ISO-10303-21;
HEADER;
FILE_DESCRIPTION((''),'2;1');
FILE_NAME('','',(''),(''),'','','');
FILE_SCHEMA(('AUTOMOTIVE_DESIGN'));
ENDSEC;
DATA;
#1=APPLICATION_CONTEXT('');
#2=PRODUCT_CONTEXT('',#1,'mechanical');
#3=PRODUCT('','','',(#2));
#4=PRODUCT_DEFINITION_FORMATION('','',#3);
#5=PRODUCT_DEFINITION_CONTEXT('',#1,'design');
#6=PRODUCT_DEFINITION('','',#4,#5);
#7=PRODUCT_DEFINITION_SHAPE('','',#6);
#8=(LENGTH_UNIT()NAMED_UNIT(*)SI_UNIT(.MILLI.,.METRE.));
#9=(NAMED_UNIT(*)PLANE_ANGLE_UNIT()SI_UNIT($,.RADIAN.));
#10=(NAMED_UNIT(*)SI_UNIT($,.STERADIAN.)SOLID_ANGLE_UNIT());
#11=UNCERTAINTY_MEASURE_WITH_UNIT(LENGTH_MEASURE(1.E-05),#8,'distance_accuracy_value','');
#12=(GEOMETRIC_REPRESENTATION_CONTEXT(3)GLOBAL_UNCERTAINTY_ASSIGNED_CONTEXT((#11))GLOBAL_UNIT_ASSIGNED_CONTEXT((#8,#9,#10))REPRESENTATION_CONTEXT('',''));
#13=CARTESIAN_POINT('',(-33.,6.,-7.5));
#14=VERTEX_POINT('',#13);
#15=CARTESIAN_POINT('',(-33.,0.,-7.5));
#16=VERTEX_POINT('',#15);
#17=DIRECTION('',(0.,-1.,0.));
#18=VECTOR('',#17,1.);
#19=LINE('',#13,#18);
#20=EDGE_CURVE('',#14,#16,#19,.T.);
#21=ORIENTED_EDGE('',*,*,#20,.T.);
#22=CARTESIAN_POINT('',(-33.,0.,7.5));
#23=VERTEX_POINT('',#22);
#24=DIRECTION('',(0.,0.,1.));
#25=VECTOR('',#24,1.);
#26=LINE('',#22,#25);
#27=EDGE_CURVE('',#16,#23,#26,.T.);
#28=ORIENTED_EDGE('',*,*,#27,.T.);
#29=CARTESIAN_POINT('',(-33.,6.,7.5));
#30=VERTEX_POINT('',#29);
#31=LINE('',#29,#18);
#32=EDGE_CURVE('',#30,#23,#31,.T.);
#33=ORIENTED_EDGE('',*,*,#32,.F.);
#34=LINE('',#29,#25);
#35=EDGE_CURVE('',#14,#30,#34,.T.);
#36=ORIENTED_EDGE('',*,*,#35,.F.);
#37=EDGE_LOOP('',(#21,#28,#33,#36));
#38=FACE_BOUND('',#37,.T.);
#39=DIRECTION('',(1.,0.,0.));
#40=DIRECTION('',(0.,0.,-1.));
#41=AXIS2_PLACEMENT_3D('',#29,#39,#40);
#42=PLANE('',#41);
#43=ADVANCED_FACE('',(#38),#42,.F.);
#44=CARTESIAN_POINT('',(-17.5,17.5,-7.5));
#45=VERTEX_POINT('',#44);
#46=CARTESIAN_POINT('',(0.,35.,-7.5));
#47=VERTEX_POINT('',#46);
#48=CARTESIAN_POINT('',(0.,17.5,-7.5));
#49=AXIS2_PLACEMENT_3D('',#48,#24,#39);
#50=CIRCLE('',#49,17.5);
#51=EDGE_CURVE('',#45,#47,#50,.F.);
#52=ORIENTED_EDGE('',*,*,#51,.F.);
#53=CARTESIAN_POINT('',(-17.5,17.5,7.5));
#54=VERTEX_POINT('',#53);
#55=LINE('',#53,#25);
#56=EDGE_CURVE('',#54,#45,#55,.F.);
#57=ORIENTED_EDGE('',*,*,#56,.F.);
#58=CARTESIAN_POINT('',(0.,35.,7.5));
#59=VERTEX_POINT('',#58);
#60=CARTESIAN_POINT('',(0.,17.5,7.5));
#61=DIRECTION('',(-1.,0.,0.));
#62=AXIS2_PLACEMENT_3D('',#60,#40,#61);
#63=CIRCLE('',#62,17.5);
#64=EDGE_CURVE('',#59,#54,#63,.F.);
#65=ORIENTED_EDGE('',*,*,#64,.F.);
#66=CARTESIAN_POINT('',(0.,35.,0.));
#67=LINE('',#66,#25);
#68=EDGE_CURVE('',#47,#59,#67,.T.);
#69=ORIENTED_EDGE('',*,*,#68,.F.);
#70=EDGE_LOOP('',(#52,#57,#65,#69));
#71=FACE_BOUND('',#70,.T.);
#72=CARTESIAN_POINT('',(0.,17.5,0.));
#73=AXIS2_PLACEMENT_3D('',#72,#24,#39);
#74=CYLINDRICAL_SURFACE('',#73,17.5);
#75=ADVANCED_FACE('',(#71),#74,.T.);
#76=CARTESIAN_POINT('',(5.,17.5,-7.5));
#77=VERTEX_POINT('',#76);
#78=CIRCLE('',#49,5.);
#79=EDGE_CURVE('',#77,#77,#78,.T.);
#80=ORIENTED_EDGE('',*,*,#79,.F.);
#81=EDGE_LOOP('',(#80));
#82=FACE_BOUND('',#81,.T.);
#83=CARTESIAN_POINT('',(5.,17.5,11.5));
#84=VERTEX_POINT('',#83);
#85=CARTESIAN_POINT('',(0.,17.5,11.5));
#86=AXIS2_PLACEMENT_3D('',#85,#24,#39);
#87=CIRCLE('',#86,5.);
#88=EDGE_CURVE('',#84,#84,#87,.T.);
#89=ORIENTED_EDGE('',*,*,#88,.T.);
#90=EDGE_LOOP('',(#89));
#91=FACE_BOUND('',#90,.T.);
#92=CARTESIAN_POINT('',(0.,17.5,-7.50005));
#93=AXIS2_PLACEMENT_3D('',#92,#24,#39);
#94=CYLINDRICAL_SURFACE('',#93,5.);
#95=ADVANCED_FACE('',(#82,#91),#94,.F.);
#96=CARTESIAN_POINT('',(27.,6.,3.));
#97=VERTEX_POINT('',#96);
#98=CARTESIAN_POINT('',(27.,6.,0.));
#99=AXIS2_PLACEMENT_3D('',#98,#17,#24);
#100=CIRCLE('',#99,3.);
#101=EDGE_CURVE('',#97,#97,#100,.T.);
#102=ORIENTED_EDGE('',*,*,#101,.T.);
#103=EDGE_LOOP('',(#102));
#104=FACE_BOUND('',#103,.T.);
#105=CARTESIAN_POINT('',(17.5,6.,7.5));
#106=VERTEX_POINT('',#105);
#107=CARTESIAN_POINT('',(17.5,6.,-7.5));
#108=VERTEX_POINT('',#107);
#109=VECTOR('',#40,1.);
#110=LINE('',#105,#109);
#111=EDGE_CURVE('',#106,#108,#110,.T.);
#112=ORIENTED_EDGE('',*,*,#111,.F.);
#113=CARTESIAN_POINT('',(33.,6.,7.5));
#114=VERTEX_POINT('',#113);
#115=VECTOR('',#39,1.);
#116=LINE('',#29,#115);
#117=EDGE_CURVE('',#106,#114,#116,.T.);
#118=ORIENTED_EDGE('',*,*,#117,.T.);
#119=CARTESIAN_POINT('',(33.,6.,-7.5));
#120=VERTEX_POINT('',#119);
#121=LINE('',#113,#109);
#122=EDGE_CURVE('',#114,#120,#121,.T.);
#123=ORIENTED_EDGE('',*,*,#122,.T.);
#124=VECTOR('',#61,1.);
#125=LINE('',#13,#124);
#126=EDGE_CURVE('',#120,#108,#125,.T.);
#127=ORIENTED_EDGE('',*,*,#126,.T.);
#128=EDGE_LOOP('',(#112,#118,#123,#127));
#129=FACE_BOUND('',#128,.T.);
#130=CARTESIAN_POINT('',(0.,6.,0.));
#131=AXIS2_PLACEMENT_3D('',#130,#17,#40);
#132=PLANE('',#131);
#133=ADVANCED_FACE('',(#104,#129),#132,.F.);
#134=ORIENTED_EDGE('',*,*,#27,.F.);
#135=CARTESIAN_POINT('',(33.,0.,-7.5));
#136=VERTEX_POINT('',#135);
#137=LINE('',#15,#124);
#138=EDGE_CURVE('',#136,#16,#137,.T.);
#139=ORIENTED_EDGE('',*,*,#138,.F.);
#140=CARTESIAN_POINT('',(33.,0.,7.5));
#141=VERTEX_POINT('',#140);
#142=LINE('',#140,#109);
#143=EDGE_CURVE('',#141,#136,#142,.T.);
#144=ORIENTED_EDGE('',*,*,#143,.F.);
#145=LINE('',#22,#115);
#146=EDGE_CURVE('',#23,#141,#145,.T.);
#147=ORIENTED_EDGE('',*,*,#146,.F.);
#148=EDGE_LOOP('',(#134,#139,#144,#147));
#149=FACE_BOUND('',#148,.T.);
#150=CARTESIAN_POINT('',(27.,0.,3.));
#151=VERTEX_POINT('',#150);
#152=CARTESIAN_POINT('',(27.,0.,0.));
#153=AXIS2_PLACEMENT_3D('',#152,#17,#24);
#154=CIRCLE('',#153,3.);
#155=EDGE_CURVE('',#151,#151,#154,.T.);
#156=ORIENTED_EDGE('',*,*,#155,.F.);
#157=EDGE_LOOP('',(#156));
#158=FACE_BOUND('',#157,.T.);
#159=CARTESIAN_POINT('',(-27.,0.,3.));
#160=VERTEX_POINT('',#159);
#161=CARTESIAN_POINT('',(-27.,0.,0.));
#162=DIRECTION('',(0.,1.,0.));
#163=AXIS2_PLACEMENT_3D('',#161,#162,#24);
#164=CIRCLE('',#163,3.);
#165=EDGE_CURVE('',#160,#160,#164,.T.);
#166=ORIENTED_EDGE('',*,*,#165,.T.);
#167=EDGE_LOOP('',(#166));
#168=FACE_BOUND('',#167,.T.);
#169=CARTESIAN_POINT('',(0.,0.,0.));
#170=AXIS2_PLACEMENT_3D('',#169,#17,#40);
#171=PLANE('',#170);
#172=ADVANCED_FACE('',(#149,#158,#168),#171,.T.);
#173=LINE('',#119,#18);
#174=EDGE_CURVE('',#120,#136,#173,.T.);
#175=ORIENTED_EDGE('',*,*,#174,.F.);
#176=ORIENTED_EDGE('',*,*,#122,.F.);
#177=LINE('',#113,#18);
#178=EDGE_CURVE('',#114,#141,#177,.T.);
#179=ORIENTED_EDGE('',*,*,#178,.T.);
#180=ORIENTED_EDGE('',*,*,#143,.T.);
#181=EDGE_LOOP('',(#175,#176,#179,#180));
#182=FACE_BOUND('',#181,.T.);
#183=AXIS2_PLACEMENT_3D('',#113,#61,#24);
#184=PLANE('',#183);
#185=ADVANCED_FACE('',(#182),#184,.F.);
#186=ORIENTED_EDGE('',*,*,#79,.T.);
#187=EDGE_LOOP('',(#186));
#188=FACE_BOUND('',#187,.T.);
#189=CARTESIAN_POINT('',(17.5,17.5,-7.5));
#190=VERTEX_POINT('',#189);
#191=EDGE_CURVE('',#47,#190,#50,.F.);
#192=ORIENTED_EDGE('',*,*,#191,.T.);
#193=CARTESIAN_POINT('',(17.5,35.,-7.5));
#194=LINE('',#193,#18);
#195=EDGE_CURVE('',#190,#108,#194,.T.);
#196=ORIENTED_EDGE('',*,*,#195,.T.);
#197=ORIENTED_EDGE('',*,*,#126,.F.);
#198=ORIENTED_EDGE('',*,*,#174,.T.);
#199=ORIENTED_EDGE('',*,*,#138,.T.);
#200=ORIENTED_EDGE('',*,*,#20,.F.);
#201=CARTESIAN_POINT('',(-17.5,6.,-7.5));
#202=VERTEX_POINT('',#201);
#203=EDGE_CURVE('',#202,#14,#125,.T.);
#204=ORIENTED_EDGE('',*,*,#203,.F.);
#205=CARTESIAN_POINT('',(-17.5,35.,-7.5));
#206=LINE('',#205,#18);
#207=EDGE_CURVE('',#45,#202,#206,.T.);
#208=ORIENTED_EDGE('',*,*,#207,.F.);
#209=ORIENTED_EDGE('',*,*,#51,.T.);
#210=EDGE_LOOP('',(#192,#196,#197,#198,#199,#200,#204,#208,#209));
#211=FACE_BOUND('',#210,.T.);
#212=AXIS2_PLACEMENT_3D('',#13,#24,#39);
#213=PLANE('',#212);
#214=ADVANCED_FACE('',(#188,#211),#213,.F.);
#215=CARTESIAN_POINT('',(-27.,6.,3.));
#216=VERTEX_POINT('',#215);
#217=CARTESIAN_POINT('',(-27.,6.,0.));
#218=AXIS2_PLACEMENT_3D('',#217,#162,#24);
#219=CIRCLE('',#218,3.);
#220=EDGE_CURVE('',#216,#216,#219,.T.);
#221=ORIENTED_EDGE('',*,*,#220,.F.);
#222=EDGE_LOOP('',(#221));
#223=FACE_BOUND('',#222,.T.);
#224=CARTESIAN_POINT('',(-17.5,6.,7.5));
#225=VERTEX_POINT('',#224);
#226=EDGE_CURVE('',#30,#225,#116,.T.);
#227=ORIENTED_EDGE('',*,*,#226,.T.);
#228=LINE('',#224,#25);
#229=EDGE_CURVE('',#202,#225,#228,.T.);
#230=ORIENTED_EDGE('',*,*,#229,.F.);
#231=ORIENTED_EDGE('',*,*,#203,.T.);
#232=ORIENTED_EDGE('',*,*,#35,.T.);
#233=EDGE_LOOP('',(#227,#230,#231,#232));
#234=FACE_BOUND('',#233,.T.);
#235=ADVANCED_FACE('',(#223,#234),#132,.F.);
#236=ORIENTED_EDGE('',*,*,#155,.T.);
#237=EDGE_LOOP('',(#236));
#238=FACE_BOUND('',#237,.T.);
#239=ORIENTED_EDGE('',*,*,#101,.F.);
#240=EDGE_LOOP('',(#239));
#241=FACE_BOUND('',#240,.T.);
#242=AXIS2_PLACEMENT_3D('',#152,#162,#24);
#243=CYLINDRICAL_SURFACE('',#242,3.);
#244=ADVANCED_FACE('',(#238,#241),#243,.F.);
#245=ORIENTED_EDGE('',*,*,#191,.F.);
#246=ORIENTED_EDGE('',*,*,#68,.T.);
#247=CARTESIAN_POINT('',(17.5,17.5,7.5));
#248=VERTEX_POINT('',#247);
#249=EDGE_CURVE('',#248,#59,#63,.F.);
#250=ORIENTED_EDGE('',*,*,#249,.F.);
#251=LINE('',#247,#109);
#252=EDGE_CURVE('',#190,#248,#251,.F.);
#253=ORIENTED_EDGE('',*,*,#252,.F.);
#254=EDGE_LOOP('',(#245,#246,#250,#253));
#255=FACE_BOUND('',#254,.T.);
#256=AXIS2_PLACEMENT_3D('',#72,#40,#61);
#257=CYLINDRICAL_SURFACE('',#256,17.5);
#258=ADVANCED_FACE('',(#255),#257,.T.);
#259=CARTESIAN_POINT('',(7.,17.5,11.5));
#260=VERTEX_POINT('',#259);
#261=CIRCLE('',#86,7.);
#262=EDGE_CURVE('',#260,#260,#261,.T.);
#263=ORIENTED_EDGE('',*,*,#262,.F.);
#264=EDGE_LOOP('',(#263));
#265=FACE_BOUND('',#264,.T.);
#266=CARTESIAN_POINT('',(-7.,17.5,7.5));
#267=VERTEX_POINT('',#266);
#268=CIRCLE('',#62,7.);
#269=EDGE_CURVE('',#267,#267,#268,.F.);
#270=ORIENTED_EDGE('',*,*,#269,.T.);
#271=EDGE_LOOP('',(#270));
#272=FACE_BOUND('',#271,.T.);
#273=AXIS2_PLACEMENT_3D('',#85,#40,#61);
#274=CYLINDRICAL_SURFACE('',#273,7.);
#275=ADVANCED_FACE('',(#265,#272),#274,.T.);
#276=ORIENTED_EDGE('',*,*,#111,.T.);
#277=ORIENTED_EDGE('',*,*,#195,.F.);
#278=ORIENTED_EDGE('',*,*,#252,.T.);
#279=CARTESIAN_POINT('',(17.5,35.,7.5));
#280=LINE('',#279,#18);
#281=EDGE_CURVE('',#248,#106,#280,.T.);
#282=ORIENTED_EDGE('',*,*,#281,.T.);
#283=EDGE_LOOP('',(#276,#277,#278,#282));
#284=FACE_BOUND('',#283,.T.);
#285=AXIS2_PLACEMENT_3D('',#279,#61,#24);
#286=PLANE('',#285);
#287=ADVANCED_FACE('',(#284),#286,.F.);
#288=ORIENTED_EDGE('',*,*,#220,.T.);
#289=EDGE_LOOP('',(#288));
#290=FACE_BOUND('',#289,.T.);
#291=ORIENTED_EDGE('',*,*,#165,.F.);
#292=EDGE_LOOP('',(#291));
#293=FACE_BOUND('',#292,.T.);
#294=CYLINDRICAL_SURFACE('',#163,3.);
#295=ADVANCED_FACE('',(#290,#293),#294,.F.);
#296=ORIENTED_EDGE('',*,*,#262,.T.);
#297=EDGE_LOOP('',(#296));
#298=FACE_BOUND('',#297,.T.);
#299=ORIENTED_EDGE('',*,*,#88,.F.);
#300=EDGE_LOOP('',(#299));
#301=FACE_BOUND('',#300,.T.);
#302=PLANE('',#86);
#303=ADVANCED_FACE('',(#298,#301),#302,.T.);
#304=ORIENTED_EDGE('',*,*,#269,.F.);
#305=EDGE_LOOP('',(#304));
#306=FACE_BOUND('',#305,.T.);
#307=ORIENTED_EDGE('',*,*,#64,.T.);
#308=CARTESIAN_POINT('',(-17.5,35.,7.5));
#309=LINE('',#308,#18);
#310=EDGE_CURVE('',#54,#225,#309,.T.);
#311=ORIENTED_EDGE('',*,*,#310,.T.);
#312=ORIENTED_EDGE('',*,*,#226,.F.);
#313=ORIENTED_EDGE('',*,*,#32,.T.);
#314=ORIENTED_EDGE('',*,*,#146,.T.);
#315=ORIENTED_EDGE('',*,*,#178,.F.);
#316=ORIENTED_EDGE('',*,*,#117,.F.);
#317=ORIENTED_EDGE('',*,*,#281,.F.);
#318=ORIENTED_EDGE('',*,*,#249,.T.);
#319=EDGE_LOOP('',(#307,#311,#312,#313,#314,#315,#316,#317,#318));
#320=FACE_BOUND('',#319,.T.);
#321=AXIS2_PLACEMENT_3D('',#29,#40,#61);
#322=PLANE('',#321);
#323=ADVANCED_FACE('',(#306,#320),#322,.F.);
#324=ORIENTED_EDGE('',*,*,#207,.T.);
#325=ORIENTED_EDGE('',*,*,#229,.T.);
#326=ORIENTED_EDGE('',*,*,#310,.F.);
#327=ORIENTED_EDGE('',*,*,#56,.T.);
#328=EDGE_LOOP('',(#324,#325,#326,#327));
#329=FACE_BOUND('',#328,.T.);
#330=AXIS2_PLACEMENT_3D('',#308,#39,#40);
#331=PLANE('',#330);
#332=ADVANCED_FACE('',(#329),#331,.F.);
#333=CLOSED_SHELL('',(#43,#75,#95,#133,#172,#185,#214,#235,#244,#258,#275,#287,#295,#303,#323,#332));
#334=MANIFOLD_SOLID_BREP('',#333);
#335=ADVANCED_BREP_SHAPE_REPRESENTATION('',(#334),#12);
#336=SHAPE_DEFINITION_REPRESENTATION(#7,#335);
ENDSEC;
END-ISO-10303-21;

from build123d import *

# Parameters (mm, degrees)
SKETCH1_W           = 66
SKETCH1_H           = 15
BOSS_EXTRUDE1_DEPTH = 6
SKETCH2_W           = 35
SKETCH2_H           = 15
BOSS_EXTRUDE2_DEPTH = 29
FILLET1_R           = 17.5
SKETCH3_R           = 7
BOSS_EXTRUDE3_DEPTH = 4
SKETCH4_R           = 5
CUT_EXTRUDE1_DEPTH  = 52.720402164
SKETCH5_R           = 3
CUT_EXTRUDE2_DEPTH  = 46.412002819


with BuildPart() as part:
    # Sketch1 → Boss-Extrude1 (new body)
    with BuildSketch(Plane(origin=(0, 0, 0), x_dir=(1, 0, 0), z_dir=(0, 1, 0))):
        Rectangle(SKETCH1_W, SKETCH1_H)
    extrude(amount=BOSS_EXTRUDE1_DEPTH)

    # Sketch2 → Boss-Extrude2 (add)
    with BuildSketch(Plane(origin=(0, 6, 0), x_dir=(1, 0, 0), z_dir=(0, 1, 0))):
        Rectangle(SKETCH2_W, SKETCH2_H)
    extrude(amount=BOSS_EXTRUDE2_DEPTH)

    # Fillet1
    fillet1_edges = [part.edges().sort_by_distance(p)[0] for p in [
        (17.5, 35, 0),
        (-17.5, 35, 0),
    ]]
    fillet(fillet1_edges, radius=FILLET1_R - 0.0001)  # a hair under: the kernel refuses the full size

    # Sketch3 → Boss-Extrude3 (add)
    with BuildSketch(Plane.XY.offset(7.5)):
        with Locations(Location((0, 17.5, 0), (0, 0, 180))):
            Circle(SKETCH3_R)
    extrude(amount=BOSS_EXTRUDE3_DEPTH)

    # Sketch4 → Cut-Extrude1 (cut, through all)
    with BuildSketch(Plane.XY.offset(11.5)):
        with Locations((0, 17.5)):
            Circle(SKETCH4_R)
    extrude(amount=-CUT_EXTRUDE1_DEPTH, mode=Mode.SUBTRACT)

    # Sketch5 → Cut-Extrude2 (cut, through all)
    with BuildSketch(Plane(origin=(0, 6, 0), x_dir=(1, 0, 0), z_dir=(0, 1, 0))):
        with Locations(Location((-27, 0, 0), (0, 0, 270))):
            Circle(SKETCH5_R)
    cut_extrude2 = extrude(amount=-CUT_EXTRUDE2_DEPTH, mode=Mode.SUBTRACT)

    # Mirror1: Cut-Extrude2 across plane
    add(cut_extrude2.mirror(Plane(origin=(0, 0, 0), x_dir=(0, 0, 1), z_dir=(1, 0, 0))), mode=Mode.SUBTRACT)


solid = part.part
